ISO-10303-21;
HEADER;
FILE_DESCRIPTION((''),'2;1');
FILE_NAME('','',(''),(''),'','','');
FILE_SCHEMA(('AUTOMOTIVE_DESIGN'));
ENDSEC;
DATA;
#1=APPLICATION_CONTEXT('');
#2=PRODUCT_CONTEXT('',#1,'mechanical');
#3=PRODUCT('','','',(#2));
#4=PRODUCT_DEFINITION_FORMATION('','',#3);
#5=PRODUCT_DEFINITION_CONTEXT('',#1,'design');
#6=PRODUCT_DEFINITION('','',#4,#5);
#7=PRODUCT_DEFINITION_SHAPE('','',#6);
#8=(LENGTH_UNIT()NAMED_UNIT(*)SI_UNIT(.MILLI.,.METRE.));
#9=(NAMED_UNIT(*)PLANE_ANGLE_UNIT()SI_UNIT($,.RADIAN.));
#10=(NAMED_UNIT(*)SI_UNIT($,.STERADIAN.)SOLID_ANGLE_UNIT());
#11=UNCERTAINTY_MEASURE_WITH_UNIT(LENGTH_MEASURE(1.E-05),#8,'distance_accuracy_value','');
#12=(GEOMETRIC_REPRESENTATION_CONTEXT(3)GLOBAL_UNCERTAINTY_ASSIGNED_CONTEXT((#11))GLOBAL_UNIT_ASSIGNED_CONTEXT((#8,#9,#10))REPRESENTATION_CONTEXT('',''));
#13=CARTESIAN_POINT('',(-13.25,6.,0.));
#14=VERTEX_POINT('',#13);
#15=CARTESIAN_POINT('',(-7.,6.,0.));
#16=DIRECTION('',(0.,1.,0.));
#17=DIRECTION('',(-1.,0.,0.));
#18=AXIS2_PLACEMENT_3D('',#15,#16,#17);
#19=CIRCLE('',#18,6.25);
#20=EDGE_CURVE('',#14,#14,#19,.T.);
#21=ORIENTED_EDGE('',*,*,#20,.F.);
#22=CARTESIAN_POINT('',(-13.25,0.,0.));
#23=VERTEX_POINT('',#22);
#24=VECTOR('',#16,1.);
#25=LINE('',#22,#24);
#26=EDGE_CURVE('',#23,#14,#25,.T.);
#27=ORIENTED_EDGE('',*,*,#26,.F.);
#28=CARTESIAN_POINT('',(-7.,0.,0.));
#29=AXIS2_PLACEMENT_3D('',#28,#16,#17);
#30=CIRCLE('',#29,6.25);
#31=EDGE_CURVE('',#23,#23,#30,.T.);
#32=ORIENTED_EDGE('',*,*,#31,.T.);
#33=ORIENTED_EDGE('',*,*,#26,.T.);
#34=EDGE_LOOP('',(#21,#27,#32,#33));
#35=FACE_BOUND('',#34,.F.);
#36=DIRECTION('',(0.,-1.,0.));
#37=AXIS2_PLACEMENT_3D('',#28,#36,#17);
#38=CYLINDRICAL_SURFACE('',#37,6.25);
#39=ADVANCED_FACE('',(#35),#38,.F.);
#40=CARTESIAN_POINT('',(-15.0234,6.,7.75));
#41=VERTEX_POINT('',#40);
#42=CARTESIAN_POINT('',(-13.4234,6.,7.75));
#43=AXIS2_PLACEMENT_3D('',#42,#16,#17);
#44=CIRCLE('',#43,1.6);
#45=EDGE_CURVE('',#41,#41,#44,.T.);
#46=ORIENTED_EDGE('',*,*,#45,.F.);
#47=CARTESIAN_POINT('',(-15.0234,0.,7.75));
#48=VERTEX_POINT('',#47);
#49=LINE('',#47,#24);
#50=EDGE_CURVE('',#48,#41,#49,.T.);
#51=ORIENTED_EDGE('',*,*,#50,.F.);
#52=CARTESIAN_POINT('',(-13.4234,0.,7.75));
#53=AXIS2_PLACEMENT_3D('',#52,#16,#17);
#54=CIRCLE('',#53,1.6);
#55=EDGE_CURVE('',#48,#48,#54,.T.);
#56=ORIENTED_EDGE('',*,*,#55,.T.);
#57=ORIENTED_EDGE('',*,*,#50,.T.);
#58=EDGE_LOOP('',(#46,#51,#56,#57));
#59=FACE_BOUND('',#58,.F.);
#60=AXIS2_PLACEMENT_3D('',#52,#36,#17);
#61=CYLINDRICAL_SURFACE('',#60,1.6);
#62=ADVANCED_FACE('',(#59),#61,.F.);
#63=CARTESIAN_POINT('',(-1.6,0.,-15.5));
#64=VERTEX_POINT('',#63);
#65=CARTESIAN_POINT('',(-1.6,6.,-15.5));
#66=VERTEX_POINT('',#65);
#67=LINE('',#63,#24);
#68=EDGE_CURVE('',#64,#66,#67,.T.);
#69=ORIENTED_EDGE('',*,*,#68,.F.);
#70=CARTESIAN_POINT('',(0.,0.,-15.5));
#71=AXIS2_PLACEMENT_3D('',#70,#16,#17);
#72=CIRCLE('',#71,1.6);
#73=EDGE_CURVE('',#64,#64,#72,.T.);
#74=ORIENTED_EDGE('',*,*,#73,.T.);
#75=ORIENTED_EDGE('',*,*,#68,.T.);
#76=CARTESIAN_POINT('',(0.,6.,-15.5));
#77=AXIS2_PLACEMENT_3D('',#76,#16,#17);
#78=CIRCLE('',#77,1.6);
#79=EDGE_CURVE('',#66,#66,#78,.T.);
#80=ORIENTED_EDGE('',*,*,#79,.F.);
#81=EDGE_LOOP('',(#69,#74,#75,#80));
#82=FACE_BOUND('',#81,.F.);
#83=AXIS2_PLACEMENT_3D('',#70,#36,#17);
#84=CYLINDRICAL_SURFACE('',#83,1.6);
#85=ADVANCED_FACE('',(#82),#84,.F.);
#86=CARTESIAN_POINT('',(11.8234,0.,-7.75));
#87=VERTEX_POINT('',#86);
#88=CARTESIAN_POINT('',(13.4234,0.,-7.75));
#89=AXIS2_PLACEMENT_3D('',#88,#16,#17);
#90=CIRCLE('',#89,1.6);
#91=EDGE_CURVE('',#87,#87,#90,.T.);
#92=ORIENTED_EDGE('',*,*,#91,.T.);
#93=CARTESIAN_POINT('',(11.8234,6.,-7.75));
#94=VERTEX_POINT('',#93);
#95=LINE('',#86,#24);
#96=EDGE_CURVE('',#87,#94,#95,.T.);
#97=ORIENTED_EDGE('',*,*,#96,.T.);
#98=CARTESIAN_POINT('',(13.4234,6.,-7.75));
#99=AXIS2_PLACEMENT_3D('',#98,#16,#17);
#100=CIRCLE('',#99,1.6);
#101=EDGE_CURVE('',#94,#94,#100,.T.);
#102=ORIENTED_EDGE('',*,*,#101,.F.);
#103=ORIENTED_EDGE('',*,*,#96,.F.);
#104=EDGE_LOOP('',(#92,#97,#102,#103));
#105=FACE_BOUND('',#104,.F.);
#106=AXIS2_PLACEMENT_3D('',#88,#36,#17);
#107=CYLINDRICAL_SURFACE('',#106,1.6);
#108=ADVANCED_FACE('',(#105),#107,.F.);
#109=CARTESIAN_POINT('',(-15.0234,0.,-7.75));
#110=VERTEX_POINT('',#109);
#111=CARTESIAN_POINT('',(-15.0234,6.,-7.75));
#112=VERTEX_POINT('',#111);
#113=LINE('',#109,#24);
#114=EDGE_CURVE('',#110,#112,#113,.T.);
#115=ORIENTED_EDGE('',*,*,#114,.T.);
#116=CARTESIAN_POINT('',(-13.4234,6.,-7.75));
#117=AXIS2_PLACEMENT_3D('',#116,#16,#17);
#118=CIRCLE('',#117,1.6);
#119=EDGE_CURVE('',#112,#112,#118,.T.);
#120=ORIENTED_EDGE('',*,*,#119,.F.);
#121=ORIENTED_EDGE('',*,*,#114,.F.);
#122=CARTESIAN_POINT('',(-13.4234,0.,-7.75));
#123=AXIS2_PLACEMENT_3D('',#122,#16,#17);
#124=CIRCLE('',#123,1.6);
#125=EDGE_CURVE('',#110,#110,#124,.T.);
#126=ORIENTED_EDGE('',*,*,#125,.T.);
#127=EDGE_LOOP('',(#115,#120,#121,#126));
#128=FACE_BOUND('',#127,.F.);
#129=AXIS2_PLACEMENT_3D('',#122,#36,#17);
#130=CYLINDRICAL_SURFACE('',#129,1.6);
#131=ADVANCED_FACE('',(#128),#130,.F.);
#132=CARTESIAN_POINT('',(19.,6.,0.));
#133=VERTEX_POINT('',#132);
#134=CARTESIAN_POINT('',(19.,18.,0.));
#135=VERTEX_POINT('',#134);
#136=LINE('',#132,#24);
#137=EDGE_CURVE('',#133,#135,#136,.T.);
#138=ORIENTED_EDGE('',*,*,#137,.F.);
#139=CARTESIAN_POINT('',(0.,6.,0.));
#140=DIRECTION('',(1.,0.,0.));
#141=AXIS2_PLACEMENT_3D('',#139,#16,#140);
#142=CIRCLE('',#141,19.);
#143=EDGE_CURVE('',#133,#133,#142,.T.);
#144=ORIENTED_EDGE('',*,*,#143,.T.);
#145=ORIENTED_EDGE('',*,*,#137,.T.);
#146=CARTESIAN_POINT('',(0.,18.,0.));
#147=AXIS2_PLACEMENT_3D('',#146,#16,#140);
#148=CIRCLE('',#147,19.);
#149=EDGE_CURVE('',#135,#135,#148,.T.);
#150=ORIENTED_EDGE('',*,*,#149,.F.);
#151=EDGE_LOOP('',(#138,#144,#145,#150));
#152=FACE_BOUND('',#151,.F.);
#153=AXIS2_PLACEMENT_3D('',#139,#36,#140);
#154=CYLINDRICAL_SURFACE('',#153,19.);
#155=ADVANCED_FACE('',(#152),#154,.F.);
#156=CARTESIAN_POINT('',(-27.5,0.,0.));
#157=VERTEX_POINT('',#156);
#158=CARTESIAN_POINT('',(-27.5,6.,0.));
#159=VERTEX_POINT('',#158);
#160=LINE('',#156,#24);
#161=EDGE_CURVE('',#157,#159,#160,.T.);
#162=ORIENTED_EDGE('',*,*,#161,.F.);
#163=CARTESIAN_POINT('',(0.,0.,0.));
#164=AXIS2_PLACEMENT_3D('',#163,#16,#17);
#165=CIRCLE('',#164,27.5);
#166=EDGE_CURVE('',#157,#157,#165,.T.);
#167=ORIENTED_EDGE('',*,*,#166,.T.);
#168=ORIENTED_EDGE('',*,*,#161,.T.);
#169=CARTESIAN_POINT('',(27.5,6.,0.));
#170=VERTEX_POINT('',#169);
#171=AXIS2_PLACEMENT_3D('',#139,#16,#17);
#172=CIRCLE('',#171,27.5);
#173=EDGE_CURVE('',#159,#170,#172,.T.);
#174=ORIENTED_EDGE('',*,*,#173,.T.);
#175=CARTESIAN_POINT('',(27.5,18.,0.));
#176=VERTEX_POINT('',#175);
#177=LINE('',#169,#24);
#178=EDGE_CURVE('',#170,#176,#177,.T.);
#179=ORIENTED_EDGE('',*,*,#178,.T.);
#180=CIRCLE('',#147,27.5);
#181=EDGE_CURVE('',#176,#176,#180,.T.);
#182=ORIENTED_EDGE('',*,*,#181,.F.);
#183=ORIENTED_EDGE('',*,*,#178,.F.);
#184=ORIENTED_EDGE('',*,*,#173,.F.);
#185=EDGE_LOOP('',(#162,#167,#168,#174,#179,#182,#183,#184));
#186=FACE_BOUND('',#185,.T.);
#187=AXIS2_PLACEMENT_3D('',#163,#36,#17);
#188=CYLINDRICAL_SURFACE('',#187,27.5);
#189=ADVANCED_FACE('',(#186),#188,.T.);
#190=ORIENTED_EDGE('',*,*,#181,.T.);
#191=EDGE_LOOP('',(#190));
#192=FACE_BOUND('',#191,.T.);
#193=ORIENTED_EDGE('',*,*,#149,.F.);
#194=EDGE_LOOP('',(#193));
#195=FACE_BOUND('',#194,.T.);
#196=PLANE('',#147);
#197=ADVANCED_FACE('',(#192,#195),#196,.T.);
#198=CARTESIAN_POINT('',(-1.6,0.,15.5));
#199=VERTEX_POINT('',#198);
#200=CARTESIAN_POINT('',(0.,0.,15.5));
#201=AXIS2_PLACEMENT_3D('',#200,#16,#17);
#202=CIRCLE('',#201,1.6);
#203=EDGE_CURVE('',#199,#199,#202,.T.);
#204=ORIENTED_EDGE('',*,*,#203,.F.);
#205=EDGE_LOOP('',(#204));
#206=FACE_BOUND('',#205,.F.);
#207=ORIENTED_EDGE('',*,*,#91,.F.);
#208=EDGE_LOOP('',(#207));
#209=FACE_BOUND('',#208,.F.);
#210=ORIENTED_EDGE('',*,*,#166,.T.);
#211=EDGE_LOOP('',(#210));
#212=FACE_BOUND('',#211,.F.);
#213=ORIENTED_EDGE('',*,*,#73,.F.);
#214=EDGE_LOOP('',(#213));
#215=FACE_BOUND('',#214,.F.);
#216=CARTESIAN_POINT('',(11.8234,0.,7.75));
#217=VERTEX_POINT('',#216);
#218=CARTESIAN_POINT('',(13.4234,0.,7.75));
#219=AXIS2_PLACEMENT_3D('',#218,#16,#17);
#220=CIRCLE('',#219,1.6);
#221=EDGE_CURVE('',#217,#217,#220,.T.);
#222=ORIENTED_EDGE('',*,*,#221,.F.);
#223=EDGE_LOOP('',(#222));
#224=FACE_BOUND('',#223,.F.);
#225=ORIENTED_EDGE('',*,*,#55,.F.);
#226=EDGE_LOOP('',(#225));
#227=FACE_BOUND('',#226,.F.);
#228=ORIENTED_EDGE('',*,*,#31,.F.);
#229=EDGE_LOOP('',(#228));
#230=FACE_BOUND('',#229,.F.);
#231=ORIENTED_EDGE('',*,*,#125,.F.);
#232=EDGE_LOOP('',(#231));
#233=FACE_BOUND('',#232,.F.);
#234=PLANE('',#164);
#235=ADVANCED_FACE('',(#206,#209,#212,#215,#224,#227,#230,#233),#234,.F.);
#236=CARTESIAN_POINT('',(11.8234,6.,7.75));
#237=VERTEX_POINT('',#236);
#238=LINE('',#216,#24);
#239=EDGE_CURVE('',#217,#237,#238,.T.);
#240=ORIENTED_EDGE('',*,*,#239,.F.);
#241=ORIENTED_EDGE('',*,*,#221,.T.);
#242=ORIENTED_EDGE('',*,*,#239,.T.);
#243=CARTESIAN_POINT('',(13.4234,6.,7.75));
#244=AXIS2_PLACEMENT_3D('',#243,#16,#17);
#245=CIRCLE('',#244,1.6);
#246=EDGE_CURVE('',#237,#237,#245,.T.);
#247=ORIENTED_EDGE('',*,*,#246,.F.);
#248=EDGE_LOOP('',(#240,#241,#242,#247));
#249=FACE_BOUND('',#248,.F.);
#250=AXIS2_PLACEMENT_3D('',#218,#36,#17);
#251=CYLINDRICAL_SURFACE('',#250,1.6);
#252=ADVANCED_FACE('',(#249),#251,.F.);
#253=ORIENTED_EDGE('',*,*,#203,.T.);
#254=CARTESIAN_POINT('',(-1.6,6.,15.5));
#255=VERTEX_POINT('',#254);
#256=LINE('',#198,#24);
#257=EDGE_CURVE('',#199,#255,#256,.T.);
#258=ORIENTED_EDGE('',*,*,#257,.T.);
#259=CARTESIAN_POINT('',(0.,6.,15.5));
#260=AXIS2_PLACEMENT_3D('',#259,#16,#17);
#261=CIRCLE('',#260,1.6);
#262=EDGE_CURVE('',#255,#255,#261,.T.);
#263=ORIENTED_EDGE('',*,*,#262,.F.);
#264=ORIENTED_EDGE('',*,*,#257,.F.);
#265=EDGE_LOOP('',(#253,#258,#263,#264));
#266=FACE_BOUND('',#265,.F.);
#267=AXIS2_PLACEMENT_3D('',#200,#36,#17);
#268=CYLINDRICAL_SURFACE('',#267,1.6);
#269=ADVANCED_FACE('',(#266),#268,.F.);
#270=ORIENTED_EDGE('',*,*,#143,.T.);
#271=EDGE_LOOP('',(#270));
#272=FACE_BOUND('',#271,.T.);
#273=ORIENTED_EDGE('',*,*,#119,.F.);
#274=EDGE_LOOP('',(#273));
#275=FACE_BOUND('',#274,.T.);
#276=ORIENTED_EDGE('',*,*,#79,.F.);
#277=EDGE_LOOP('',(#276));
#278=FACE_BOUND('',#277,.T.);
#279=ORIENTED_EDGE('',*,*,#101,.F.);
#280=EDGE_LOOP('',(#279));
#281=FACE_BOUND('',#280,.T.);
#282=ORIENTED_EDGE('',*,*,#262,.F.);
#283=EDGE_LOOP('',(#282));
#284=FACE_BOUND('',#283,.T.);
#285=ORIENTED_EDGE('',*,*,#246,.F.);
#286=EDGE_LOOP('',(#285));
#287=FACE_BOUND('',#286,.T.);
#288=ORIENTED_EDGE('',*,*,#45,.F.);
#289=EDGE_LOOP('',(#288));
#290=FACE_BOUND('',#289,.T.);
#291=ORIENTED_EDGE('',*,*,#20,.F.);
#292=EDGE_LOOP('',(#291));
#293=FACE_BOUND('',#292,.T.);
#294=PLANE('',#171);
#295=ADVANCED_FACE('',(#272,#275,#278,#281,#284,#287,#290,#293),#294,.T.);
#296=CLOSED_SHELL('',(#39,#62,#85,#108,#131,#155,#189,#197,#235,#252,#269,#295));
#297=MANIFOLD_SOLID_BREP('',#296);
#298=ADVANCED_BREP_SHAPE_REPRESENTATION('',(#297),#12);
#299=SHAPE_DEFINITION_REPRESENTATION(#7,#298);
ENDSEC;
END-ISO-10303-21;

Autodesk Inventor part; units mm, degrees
ref_plane "YZ Plane" through (0, 0, 0) normal (1, 0, 0) x (0, 1, 0)
ref_plane "XZ Plane" through (0, 0, 0) normal (0, 1, 0) x (-1, 0, 0)
ref_plane "XY Plane" through (0, 0, 0) normal (0, 0, 1) x (1, 0, 0)
sketch "Sketch1" plane through (0, 0, 0) normal (0, 1, 0) x (-1, 0, 0)
  circle A0 centre (7, 0) radius 6.25
  circle A1 centre (0, 15.5) radius 1.6
  circle A2 centre (-13.4234, 7.75) radius 1.6
  circle A3 centre (-13.4234, -7.75) radius 1.6
  circle A4 centre (0, -15.5) radius 1.6
  circle A5 centre (13.4234, -7.75) radius 1.6
  circle A6 centre (13.4234, 7.75) radius 1.6
  circle A7 centre (0, 0) radius 27.5
  dimension "d0" = 7
  dimension "d1" = 12.5
  dimension "d2" = 3.2
  dimension "d3" = 15.5
  dimension "d6" = 360
  dimension "d8" = 55
extrude "Extrusion1" add sketch "Sketch1" along normal blind 6
sketch "Sketch2" plane through (0, 6, 0) normal (0, 1, 0) x (1, 0, 0)
  circle A0 centre (0, 0) radius 19
  circle A1 centre (0, 0) radius 27.5
  dimension "d11" = 38
extrude "Extrusion2" add sketch "Sketch2" along normal blind 12
properties part number "motor_holder_test"
